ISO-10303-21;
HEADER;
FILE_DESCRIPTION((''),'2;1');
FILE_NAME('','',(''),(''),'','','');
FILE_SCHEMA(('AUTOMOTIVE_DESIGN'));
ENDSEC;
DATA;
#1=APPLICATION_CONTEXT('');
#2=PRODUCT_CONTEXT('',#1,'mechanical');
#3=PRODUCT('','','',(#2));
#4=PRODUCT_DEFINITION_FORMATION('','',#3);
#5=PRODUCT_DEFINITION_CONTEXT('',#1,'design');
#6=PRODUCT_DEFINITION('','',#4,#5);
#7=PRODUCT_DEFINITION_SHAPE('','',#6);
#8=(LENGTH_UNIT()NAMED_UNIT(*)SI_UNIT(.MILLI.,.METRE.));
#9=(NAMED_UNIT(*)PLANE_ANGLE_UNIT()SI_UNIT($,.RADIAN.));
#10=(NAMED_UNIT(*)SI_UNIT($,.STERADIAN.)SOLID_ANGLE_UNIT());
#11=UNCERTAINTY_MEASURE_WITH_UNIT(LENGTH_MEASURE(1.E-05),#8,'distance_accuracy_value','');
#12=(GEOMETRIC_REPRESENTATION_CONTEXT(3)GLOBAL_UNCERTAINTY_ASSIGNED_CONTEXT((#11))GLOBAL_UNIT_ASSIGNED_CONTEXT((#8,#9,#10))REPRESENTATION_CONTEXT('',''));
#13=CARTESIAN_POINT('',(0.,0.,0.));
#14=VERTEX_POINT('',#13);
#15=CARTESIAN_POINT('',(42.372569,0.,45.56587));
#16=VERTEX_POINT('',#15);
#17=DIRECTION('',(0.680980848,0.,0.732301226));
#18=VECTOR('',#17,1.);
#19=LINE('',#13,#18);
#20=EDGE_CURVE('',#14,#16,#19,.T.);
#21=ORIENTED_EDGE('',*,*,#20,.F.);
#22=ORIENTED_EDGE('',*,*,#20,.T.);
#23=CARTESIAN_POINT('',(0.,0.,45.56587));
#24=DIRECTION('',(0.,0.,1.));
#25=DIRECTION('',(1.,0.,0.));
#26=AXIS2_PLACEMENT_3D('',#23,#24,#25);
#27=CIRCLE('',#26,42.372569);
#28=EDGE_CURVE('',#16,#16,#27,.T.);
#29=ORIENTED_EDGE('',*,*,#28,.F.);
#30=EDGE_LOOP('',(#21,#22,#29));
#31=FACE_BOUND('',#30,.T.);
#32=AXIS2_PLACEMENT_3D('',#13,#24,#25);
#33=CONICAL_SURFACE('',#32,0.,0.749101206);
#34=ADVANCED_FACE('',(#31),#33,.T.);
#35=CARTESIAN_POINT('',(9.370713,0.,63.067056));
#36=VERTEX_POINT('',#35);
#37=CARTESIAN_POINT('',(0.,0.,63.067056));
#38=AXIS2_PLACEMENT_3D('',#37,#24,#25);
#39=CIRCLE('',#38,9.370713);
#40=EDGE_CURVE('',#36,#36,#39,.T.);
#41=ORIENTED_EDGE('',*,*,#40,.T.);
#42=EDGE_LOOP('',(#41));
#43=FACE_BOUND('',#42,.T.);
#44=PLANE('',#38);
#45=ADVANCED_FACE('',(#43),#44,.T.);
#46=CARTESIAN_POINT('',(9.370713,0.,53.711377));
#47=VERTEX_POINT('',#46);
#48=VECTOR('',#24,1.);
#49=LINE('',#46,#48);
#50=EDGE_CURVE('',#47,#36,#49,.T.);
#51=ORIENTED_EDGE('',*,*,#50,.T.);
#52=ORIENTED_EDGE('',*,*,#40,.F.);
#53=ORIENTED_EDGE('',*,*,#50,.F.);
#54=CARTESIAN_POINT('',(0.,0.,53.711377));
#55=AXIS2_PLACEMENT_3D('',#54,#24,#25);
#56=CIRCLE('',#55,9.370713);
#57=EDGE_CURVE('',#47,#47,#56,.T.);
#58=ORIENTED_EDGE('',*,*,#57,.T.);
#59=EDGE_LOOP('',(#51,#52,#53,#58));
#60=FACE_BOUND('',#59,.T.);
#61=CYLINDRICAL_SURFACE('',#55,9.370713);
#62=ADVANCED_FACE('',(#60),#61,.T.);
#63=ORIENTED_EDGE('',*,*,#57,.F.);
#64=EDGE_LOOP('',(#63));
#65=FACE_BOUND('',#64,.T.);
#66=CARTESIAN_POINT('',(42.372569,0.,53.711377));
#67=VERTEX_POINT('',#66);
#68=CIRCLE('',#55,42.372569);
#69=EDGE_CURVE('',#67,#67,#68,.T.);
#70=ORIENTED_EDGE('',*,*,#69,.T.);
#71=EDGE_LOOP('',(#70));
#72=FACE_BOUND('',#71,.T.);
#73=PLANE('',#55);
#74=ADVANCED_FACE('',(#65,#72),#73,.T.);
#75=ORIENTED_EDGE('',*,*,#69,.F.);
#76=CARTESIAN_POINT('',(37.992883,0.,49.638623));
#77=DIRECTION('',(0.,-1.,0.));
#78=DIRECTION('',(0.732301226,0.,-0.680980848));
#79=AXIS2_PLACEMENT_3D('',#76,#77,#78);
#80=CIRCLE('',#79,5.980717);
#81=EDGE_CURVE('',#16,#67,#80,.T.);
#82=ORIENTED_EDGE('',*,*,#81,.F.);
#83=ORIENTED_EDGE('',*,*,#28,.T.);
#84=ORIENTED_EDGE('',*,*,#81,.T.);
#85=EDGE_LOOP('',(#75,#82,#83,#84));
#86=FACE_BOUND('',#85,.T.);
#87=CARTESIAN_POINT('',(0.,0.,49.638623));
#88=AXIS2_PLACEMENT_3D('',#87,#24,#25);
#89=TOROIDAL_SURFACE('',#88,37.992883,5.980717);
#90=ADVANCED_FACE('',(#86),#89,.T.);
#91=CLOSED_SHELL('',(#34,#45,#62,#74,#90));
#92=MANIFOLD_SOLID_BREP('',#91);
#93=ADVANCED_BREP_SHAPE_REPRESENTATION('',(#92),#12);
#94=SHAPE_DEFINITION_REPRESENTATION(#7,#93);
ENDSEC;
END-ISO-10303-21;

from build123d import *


# Not quite as in the source:
# - a feature names something its author has since deleted; it is built from what else it names


with BuildPart() as f1:
    # F0 (on Front) → F1 (revolve)
    with BuildSketch(Plane.XZ):
        with BuildLine():
            Line((0, 63.0670562387), (0, 0))
            Line((0, 0), (42.3725694418, 45.5658696592))
            ThreePointArc((42.3725694418, 45.5658696592), (43.9736000442, 49.6386233717), (42.3725694418, 53.7113770843))
            Line((42.3725694418, 53.7113770843), (9.3707125634, 53.7113770843))
            Line((9.3707125634, 53.7113770843), (9.3707125634, 63.0670562387))
            Line((9.3707125634, 63.0670562387), (0, 63.0670562387))
        make_face()
    revolve(axis=Axis((0, 0, 31.5335281193), (0, 0, 1)))


solid = f1.part
